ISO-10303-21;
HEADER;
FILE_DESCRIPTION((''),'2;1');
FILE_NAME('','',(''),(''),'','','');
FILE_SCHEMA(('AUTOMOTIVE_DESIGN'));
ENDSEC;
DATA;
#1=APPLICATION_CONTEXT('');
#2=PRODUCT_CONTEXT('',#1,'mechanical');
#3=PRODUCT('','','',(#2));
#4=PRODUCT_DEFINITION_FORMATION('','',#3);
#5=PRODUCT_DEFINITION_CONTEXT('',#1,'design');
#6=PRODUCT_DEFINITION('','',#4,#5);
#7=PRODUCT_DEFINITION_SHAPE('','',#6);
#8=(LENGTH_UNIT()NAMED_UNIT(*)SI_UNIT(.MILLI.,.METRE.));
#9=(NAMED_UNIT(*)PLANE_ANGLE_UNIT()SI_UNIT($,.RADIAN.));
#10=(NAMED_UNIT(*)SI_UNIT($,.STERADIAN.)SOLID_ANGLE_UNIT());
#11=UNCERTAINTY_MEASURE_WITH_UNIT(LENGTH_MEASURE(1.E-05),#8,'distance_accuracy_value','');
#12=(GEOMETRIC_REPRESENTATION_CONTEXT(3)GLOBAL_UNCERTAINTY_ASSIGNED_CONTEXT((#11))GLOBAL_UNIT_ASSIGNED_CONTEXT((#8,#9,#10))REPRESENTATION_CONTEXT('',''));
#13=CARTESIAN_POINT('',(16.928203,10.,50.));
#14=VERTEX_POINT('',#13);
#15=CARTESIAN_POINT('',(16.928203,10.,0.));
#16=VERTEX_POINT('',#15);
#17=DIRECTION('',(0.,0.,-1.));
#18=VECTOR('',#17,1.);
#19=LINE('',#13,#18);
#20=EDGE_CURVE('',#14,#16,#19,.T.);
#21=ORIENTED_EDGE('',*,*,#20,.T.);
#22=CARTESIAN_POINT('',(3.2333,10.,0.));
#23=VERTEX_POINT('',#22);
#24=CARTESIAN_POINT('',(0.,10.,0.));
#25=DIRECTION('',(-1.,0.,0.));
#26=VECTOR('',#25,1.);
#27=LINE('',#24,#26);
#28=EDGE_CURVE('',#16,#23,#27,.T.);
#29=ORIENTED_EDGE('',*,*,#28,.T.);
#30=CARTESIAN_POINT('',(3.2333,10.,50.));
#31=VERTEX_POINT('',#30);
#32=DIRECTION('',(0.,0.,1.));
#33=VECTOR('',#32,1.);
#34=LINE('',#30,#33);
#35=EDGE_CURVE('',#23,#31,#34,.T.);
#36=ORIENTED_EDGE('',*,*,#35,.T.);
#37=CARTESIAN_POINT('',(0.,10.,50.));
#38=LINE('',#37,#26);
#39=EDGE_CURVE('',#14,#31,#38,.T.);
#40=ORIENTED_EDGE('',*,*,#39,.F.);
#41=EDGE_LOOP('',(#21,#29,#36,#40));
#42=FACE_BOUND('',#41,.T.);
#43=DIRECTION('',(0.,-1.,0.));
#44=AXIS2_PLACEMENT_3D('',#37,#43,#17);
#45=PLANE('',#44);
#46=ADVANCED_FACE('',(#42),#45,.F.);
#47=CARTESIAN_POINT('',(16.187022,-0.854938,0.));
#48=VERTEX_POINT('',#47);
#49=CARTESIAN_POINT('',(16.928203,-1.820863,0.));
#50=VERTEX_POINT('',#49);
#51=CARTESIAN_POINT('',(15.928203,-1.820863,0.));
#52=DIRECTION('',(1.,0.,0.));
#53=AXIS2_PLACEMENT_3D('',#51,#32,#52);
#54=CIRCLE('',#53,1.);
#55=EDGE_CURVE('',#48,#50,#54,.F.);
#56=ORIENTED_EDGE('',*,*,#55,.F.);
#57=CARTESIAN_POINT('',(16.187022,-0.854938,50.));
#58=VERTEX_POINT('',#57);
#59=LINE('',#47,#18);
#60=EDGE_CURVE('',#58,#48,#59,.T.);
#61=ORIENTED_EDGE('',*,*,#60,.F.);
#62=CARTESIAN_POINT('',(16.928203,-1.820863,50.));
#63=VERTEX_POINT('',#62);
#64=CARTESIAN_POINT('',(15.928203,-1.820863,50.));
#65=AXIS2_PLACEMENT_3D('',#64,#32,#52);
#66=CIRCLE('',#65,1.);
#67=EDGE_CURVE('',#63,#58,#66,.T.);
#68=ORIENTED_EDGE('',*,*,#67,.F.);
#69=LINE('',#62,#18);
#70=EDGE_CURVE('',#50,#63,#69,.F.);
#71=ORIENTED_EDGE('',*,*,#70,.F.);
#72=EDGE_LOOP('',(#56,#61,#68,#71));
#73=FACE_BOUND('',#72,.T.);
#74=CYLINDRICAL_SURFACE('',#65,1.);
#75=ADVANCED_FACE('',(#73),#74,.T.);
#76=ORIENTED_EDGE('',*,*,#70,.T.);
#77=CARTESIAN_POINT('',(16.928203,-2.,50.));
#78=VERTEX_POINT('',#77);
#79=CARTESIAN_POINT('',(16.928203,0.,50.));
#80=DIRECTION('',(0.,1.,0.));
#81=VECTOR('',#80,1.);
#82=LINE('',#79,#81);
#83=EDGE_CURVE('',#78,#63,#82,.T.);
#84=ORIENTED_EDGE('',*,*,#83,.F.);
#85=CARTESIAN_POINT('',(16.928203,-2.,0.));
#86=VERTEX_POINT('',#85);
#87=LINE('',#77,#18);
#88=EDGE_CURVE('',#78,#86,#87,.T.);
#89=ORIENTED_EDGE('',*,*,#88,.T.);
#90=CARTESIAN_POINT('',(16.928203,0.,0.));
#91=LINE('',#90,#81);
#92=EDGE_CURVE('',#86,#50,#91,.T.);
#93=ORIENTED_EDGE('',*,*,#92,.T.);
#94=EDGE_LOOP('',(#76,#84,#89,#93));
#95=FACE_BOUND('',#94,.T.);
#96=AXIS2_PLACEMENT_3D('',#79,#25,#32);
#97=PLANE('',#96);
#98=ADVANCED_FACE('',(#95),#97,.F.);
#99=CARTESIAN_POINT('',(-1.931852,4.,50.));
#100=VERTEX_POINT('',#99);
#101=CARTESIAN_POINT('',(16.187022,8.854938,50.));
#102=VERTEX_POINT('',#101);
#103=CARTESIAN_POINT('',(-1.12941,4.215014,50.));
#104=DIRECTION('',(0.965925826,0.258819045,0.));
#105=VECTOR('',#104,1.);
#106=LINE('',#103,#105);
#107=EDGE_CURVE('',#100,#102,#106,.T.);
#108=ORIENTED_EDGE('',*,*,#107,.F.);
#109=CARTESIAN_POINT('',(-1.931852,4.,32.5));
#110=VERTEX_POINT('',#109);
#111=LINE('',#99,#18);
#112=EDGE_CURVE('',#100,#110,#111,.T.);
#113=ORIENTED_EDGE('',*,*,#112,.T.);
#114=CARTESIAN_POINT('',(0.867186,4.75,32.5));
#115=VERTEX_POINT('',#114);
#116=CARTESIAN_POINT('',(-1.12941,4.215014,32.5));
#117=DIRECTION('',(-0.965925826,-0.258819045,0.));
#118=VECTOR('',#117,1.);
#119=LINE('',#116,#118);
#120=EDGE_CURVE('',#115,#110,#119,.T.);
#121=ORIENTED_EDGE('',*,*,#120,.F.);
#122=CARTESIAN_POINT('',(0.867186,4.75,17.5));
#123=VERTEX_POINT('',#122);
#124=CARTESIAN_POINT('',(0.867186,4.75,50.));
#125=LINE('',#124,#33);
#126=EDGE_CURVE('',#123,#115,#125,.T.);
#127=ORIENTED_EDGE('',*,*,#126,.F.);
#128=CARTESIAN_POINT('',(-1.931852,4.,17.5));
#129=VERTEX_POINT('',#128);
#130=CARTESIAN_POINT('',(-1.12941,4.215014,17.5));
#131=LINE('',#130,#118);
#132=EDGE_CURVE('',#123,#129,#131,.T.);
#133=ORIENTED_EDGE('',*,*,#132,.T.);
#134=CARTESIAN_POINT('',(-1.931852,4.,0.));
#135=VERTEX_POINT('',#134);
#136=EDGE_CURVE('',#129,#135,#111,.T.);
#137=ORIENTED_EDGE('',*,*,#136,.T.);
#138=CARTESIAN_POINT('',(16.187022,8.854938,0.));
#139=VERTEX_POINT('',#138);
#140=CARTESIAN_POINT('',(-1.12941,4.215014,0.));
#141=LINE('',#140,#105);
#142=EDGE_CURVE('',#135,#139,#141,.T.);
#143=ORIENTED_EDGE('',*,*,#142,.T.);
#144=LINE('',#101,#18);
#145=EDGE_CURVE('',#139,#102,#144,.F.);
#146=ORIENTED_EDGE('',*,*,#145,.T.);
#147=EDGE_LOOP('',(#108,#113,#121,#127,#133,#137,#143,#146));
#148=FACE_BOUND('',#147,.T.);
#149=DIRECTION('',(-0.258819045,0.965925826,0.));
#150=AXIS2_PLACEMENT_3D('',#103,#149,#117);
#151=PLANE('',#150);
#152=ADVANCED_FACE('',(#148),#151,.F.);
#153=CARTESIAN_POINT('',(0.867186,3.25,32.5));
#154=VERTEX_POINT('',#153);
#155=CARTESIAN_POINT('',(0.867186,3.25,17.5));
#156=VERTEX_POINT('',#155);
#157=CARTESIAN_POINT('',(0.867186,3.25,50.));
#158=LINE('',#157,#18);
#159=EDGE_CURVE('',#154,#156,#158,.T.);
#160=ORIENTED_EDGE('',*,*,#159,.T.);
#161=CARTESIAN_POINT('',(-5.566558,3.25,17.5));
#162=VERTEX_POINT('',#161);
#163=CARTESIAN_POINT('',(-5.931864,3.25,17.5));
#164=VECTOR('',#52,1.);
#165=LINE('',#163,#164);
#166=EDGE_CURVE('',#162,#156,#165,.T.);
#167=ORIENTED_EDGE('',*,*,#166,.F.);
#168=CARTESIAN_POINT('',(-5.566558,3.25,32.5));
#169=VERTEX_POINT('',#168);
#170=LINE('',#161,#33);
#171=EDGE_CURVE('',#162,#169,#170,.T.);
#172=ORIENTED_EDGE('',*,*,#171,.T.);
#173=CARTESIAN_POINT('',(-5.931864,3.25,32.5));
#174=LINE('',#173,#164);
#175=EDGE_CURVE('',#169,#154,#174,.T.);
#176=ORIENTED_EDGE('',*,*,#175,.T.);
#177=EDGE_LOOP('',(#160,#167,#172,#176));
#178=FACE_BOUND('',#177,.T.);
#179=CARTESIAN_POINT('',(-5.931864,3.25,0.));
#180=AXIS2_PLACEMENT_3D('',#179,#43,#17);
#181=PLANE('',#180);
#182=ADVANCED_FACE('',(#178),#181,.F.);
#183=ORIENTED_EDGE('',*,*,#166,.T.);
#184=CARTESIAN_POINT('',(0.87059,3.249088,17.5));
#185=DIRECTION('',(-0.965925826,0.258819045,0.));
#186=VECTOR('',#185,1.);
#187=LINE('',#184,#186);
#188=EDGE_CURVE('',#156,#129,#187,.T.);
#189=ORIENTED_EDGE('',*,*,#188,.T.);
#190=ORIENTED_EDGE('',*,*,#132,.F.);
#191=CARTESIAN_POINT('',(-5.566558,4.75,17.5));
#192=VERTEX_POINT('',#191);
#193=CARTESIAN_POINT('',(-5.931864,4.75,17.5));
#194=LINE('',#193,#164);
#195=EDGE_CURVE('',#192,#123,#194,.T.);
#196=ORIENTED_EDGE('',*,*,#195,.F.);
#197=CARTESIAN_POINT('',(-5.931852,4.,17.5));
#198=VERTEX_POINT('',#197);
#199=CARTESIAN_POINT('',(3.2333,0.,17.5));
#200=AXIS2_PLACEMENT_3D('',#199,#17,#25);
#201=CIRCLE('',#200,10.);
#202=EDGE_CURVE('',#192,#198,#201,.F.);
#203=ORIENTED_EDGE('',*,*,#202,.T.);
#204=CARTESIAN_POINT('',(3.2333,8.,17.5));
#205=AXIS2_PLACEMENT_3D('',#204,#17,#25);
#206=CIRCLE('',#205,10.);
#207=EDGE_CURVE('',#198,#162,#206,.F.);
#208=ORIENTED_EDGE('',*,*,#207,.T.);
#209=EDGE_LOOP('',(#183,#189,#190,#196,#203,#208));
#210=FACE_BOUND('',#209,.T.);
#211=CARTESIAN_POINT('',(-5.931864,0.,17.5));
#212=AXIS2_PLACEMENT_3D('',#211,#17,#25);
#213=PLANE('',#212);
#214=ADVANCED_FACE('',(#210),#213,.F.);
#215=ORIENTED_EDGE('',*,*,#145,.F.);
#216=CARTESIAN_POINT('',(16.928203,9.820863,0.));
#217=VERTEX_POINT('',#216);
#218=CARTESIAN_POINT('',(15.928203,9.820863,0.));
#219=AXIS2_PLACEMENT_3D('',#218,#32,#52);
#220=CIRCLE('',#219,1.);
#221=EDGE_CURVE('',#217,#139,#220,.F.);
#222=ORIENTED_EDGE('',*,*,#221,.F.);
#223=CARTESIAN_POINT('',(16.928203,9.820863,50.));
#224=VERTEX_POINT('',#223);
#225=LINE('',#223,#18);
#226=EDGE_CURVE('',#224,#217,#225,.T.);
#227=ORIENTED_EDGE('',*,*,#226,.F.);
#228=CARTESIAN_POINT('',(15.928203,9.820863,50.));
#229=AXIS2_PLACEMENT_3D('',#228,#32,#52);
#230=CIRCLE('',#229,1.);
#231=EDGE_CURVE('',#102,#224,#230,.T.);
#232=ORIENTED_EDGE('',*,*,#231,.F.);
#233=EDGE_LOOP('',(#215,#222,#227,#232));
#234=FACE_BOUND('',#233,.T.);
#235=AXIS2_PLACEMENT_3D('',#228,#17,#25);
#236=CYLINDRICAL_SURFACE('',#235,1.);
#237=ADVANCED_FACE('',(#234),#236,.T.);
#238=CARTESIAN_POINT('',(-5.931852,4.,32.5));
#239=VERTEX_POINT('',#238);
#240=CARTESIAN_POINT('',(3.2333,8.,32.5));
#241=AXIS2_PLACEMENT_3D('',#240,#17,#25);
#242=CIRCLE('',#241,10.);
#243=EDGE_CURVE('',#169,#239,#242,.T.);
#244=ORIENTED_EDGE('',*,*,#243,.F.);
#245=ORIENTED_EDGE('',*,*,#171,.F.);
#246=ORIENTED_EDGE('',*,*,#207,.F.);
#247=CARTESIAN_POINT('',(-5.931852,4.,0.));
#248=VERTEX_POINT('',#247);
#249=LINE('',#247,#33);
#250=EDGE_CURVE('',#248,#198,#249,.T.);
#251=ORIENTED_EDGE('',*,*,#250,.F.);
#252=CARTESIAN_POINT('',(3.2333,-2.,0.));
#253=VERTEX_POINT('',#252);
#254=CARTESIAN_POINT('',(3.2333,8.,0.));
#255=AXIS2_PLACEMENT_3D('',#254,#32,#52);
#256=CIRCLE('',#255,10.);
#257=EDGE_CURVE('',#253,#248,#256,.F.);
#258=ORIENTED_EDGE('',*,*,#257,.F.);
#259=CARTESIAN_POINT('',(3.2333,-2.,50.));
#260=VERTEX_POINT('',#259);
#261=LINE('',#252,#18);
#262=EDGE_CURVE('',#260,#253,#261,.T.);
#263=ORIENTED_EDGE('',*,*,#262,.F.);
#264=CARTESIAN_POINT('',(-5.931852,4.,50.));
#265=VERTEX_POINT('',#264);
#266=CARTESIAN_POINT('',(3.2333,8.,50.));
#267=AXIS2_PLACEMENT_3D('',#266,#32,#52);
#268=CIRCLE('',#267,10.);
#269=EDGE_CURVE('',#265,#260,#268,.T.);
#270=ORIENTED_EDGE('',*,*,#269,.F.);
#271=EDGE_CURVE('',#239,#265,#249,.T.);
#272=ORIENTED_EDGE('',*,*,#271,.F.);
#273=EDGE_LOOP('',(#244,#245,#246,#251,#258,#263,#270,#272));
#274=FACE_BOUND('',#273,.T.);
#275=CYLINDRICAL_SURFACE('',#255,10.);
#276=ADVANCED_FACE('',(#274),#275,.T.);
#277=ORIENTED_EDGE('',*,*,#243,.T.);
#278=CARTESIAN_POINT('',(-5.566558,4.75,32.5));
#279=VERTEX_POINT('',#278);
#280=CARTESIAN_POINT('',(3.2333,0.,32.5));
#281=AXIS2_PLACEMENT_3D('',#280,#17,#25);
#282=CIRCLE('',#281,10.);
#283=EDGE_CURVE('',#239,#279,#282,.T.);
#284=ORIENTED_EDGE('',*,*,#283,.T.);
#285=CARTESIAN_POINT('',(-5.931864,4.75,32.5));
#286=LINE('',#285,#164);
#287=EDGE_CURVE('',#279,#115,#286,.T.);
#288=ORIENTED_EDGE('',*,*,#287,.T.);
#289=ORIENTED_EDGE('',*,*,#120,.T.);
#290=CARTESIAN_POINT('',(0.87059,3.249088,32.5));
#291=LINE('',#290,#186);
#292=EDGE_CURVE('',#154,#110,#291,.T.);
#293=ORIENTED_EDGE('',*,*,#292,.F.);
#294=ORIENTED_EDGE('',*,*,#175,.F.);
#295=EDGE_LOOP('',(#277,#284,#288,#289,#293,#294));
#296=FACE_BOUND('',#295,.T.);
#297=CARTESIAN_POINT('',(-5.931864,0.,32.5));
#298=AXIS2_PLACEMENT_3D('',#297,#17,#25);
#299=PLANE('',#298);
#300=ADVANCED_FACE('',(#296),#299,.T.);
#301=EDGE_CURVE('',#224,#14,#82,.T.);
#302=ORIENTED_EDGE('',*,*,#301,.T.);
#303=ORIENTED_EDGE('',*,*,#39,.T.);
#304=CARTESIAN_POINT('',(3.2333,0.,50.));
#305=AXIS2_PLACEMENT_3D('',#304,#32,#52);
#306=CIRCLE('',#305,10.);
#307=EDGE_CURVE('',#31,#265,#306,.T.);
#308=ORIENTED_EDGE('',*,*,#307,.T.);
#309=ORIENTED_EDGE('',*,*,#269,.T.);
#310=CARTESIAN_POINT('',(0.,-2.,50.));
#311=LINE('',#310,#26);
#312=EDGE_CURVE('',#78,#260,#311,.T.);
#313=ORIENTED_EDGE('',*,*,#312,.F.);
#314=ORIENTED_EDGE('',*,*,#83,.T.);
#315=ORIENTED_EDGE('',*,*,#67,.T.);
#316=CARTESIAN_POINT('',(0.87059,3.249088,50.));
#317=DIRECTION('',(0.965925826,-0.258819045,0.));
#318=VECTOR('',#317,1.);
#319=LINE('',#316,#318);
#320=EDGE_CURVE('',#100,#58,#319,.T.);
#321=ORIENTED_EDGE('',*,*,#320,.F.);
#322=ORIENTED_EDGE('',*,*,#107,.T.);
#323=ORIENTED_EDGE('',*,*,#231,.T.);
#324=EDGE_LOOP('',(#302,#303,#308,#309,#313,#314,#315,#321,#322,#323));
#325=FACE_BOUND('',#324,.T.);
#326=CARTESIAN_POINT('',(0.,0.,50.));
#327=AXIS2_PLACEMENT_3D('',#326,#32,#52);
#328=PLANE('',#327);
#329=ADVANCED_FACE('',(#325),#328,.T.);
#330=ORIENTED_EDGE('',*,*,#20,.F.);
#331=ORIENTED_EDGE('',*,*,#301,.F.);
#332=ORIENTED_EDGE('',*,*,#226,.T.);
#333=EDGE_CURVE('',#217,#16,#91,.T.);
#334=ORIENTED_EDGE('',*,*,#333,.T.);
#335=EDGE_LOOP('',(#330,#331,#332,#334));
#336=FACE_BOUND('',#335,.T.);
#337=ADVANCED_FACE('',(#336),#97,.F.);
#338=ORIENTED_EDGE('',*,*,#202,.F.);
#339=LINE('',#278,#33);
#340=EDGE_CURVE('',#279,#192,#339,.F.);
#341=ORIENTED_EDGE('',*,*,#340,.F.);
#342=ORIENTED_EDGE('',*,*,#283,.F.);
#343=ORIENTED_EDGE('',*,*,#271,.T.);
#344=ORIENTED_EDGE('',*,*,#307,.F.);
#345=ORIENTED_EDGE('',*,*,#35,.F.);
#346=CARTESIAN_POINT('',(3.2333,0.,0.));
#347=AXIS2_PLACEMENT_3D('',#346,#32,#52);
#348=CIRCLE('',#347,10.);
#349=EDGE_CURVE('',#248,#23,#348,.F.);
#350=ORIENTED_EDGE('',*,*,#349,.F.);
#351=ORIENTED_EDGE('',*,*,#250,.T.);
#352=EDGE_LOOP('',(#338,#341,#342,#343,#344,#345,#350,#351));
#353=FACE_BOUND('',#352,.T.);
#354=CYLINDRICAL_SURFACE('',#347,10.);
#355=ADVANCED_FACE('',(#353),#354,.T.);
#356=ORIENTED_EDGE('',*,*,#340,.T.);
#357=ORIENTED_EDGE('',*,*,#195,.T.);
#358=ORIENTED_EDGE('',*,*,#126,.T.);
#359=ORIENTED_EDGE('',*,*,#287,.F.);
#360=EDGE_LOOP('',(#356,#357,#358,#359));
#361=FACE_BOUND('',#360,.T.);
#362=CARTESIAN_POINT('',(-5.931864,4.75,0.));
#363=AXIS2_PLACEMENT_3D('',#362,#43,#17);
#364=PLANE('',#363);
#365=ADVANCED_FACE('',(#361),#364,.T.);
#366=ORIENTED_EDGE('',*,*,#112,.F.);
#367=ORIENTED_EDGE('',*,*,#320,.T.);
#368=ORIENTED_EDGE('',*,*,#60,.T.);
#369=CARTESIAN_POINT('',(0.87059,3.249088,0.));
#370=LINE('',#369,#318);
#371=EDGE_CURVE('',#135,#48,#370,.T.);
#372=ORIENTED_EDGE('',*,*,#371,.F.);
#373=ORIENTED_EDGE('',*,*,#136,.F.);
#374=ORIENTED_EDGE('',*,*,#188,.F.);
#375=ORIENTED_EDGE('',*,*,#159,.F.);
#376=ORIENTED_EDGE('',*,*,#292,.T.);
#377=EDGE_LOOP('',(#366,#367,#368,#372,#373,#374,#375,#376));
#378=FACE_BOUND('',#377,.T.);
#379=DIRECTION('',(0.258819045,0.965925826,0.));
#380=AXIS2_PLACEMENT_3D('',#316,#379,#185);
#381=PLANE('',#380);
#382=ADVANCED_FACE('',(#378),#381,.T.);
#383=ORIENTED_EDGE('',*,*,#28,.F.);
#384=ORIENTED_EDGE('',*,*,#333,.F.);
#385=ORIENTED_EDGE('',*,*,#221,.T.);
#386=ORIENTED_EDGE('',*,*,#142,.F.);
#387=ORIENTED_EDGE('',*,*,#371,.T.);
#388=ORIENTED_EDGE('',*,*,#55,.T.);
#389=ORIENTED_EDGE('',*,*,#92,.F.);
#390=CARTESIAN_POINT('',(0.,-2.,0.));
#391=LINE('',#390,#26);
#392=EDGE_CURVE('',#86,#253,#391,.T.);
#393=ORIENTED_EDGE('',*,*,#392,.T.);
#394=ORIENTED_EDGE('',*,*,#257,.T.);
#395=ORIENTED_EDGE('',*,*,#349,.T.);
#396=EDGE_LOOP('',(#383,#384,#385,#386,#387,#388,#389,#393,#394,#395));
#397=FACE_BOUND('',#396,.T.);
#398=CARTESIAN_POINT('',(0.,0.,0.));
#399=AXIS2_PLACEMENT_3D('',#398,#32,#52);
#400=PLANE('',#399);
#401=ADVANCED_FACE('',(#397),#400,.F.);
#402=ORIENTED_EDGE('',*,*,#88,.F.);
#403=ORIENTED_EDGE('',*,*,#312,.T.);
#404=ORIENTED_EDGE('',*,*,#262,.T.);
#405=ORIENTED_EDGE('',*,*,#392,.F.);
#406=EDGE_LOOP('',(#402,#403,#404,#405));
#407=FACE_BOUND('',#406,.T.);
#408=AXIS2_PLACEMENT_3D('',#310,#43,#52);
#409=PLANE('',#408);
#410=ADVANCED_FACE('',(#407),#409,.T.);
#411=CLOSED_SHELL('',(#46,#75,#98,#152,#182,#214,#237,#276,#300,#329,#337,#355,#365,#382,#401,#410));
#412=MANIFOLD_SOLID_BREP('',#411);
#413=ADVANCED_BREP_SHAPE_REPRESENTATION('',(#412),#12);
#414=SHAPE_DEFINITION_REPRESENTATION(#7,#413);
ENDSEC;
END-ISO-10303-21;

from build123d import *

# Parameters (mm, degrees)
BOSS_EXTRUDE1_DEPTH     = 50
BOSS_EXTRUDE2_DEPTH     = 50
CUT_EXTRUDE1_DEPTH      = 56.88006898
CUT_EXTRUDE1_DEPTH_BACK = 56.88006898
SKETCH3_W               = 15
SKETCH3_H               = 0.75
FILLET1_DEPTH           = 50
FILLET2_DEPTH           = 50
FILLET3_R               = 1


with BuildPart() as part:
    # Sketch1 → Boss-Extrude1 (new body)
    with BuildSketch(Plane.XY):
        Polygon((-4, -2), (16.92820323, -2), (16.92820323, -1.053536475), (-1.931851653, 4), (16.92820323, 9.053536475), (16.92820323, 10), (-4, 10), align=None)
    extrude(amount=BOSS_EXTRUDE1_DEPTH)

    # Sketch2 → Boss-Extrude2 (add)
    with BuildSketch(Plane.XY.offset(50)):
        Polygon((-5.931851653, 4), (-4, 10), (-4, -2), align=None)
    extrude(amount=-BOSS_EXTRUDE2_DEPTH)

    # Sketch3 → Cut-Extrude1 (cut, two sides: drawn at the far end of the back side and taken through both)
    with BuildSketch(Plane(origin=(-5.931851653, 0, 0), x_dir=(0, 0, -1), z_dir=(1, 0, 0)).offset(-CUT_EXTRUDE1_DEPTH_BACK)):
        with Locations((-25, 3.625)):
            Rectangle(SKETCH3_W, SKETCH3_H)
        with Locations((-25, 4.375)):
            Rectangle(SKETCH3_W, SKETCH3_H)
    extrude(amount=CUT_EXTRUDE1_DEPTH + CUT_EXTRUDE1_DEPTH_BACK, mode=Mode.SUBTRACT)

    # Fillet1: read off the stored shape, not the designer's step
    # Fillet1 outline → Fillet1 (cut)
    with BuildSketch(Plane.XY):
        with BuildLine():
            ThreePointArc((-5.931851653, 4), (-2.243925838, 8.366600265), (3.233299737, 10))
            Line((3.233299737, 10), (-4, 10))
            Line((-4, 10), (-5.931851653, 4))
        make_face()
    extrude(amount=FILLET1_DEPTH, mode=Mode.SUBTRACT)

    # Fillet2: read off the stored shape, not the designer's step
    # Fillet2 outline → Fillet2 (cut)
    with BuildSketch(Plane.XY):
        with BuildLine():
            ThreePointArc((3.233299737, -2), (-2.243925838, -0.366600265), (-5.931851653, 4))
            Line((-5.931851653, 4), (-4, -2))
            Line((-4, -2), (3.233299737, -2))
        make_face()
    extrude(amount=FILLET2_DEPTH, mode=Mode.SUBTRACT)

    # Fillet3
    fillet3_edges = [part.edges().sort_by_distance(p)[0] for p in [
        (16.92820323, -1.053536475, 25),
        (16.92820323, 9.053536475, 25),
    ]]
    fillet(fillet3_edges, radius=FILLET3_R)


solid = part.part
